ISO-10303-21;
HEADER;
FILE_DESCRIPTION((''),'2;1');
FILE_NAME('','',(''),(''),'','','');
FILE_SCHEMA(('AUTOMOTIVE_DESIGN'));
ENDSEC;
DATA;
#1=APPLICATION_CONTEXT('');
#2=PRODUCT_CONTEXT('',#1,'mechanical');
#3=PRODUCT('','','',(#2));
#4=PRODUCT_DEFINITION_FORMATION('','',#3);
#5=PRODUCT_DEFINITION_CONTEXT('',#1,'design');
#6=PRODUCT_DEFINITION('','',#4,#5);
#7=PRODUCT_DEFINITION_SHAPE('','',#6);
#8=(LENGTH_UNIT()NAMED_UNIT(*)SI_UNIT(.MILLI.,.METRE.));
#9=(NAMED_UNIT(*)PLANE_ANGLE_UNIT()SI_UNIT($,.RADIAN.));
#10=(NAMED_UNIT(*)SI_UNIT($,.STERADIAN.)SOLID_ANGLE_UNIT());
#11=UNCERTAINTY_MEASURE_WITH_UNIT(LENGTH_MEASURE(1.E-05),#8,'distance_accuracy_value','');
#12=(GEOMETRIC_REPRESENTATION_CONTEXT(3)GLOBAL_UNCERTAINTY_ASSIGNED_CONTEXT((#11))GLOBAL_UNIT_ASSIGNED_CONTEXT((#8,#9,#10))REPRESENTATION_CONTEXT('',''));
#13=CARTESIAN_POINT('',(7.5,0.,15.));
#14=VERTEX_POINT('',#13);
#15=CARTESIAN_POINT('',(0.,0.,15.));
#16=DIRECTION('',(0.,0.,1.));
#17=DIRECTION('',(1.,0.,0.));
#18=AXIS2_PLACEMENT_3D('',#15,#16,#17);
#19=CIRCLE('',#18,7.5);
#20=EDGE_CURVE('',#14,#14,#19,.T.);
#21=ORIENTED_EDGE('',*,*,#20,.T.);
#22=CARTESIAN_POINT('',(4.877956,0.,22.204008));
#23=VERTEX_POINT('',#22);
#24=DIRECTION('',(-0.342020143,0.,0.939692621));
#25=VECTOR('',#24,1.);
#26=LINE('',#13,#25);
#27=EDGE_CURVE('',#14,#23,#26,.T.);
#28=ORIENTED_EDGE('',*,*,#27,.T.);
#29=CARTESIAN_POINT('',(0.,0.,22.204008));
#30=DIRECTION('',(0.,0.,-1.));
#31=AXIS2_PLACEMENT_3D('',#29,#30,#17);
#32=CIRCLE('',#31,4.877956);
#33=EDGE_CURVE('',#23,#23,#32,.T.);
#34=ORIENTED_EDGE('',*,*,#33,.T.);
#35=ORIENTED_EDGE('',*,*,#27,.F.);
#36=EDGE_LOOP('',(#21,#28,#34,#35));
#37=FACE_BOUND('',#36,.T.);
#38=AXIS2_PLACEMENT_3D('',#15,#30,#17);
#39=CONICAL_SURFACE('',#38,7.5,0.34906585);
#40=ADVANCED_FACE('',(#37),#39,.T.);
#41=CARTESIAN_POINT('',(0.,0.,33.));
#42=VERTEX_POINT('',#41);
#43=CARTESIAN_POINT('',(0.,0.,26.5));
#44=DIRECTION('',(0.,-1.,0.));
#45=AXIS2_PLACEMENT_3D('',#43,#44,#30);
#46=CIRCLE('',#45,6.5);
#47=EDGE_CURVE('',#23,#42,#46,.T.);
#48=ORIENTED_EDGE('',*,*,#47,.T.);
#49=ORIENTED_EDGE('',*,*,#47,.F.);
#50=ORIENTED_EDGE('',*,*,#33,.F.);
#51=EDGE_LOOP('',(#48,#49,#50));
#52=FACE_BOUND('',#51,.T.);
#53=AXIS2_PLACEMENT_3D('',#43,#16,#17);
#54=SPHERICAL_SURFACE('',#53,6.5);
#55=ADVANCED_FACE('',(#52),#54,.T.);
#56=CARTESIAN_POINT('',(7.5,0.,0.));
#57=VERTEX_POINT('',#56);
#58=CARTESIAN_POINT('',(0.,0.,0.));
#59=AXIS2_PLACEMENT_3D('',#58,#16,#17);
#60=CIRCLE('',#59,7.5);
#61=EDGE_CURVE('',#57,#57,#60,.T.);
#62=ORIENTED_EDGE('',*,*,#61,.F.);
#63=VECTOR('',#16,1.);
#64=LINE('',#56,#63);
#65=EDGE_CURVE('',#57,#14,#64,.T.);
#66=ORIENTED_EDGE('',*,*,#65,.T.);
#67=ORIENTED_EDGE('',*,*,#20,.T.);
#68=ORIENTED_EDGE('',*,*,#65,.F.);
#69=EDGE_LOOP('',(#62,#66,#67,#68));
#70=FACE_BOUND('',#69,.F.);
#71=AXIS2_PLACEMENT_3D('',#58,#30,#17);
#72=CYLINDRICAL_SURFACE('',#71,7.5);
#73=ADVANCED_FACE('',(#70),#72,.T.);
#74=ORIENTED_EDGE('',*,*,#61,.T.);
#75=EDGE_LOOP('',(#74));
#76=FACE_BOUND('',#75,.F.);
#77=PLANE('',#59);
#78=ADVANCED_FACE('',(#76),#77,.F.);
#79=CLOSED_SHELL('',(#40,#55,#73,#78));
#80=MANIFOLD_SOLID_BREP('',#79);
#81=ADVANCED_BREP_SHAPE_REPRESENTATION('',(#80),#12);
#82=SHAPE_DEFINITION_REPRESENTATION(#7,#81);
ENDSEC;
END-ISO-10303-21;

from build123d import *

# Parameters (mm, degrees)
F0_R      = 7.5
F1_DEPTH  = 15
F1_FACE_R = 7.5
F2_DEPTH  = 10
F2_TAPER  = 20


# Not quite as in the source:
# - a feature names something its author has since deleted; it is built from what else it names


with BuildPart() as f1:
    # F0 (on Top) → F1 (new body)
    with BuildSketch(Plane.XY):
        Circle(F0_R)
    extrude(amount=F1_DEPTH)

    # F1_face (on face) → F2 (join)
    with BuildSketch(Plane.XY.offset(15)):
        Circle(F1_FACE_R)
    extrude(amount=F2_DEPTH, taper=F2_TAPER)

    # F3 (on Front) → F4 (revolve)
    with BuildSketch(Plane.XZ):
        with BuildLine():
            Line((0, 33), (0, 20))
            ThreePointArc((0, 20), (6.5, 26.5), (0, 33))
        make_face()
    revolve(axis=Axis((0, 0, 26.5), (0, 0, 1)))


solid = f1.part
